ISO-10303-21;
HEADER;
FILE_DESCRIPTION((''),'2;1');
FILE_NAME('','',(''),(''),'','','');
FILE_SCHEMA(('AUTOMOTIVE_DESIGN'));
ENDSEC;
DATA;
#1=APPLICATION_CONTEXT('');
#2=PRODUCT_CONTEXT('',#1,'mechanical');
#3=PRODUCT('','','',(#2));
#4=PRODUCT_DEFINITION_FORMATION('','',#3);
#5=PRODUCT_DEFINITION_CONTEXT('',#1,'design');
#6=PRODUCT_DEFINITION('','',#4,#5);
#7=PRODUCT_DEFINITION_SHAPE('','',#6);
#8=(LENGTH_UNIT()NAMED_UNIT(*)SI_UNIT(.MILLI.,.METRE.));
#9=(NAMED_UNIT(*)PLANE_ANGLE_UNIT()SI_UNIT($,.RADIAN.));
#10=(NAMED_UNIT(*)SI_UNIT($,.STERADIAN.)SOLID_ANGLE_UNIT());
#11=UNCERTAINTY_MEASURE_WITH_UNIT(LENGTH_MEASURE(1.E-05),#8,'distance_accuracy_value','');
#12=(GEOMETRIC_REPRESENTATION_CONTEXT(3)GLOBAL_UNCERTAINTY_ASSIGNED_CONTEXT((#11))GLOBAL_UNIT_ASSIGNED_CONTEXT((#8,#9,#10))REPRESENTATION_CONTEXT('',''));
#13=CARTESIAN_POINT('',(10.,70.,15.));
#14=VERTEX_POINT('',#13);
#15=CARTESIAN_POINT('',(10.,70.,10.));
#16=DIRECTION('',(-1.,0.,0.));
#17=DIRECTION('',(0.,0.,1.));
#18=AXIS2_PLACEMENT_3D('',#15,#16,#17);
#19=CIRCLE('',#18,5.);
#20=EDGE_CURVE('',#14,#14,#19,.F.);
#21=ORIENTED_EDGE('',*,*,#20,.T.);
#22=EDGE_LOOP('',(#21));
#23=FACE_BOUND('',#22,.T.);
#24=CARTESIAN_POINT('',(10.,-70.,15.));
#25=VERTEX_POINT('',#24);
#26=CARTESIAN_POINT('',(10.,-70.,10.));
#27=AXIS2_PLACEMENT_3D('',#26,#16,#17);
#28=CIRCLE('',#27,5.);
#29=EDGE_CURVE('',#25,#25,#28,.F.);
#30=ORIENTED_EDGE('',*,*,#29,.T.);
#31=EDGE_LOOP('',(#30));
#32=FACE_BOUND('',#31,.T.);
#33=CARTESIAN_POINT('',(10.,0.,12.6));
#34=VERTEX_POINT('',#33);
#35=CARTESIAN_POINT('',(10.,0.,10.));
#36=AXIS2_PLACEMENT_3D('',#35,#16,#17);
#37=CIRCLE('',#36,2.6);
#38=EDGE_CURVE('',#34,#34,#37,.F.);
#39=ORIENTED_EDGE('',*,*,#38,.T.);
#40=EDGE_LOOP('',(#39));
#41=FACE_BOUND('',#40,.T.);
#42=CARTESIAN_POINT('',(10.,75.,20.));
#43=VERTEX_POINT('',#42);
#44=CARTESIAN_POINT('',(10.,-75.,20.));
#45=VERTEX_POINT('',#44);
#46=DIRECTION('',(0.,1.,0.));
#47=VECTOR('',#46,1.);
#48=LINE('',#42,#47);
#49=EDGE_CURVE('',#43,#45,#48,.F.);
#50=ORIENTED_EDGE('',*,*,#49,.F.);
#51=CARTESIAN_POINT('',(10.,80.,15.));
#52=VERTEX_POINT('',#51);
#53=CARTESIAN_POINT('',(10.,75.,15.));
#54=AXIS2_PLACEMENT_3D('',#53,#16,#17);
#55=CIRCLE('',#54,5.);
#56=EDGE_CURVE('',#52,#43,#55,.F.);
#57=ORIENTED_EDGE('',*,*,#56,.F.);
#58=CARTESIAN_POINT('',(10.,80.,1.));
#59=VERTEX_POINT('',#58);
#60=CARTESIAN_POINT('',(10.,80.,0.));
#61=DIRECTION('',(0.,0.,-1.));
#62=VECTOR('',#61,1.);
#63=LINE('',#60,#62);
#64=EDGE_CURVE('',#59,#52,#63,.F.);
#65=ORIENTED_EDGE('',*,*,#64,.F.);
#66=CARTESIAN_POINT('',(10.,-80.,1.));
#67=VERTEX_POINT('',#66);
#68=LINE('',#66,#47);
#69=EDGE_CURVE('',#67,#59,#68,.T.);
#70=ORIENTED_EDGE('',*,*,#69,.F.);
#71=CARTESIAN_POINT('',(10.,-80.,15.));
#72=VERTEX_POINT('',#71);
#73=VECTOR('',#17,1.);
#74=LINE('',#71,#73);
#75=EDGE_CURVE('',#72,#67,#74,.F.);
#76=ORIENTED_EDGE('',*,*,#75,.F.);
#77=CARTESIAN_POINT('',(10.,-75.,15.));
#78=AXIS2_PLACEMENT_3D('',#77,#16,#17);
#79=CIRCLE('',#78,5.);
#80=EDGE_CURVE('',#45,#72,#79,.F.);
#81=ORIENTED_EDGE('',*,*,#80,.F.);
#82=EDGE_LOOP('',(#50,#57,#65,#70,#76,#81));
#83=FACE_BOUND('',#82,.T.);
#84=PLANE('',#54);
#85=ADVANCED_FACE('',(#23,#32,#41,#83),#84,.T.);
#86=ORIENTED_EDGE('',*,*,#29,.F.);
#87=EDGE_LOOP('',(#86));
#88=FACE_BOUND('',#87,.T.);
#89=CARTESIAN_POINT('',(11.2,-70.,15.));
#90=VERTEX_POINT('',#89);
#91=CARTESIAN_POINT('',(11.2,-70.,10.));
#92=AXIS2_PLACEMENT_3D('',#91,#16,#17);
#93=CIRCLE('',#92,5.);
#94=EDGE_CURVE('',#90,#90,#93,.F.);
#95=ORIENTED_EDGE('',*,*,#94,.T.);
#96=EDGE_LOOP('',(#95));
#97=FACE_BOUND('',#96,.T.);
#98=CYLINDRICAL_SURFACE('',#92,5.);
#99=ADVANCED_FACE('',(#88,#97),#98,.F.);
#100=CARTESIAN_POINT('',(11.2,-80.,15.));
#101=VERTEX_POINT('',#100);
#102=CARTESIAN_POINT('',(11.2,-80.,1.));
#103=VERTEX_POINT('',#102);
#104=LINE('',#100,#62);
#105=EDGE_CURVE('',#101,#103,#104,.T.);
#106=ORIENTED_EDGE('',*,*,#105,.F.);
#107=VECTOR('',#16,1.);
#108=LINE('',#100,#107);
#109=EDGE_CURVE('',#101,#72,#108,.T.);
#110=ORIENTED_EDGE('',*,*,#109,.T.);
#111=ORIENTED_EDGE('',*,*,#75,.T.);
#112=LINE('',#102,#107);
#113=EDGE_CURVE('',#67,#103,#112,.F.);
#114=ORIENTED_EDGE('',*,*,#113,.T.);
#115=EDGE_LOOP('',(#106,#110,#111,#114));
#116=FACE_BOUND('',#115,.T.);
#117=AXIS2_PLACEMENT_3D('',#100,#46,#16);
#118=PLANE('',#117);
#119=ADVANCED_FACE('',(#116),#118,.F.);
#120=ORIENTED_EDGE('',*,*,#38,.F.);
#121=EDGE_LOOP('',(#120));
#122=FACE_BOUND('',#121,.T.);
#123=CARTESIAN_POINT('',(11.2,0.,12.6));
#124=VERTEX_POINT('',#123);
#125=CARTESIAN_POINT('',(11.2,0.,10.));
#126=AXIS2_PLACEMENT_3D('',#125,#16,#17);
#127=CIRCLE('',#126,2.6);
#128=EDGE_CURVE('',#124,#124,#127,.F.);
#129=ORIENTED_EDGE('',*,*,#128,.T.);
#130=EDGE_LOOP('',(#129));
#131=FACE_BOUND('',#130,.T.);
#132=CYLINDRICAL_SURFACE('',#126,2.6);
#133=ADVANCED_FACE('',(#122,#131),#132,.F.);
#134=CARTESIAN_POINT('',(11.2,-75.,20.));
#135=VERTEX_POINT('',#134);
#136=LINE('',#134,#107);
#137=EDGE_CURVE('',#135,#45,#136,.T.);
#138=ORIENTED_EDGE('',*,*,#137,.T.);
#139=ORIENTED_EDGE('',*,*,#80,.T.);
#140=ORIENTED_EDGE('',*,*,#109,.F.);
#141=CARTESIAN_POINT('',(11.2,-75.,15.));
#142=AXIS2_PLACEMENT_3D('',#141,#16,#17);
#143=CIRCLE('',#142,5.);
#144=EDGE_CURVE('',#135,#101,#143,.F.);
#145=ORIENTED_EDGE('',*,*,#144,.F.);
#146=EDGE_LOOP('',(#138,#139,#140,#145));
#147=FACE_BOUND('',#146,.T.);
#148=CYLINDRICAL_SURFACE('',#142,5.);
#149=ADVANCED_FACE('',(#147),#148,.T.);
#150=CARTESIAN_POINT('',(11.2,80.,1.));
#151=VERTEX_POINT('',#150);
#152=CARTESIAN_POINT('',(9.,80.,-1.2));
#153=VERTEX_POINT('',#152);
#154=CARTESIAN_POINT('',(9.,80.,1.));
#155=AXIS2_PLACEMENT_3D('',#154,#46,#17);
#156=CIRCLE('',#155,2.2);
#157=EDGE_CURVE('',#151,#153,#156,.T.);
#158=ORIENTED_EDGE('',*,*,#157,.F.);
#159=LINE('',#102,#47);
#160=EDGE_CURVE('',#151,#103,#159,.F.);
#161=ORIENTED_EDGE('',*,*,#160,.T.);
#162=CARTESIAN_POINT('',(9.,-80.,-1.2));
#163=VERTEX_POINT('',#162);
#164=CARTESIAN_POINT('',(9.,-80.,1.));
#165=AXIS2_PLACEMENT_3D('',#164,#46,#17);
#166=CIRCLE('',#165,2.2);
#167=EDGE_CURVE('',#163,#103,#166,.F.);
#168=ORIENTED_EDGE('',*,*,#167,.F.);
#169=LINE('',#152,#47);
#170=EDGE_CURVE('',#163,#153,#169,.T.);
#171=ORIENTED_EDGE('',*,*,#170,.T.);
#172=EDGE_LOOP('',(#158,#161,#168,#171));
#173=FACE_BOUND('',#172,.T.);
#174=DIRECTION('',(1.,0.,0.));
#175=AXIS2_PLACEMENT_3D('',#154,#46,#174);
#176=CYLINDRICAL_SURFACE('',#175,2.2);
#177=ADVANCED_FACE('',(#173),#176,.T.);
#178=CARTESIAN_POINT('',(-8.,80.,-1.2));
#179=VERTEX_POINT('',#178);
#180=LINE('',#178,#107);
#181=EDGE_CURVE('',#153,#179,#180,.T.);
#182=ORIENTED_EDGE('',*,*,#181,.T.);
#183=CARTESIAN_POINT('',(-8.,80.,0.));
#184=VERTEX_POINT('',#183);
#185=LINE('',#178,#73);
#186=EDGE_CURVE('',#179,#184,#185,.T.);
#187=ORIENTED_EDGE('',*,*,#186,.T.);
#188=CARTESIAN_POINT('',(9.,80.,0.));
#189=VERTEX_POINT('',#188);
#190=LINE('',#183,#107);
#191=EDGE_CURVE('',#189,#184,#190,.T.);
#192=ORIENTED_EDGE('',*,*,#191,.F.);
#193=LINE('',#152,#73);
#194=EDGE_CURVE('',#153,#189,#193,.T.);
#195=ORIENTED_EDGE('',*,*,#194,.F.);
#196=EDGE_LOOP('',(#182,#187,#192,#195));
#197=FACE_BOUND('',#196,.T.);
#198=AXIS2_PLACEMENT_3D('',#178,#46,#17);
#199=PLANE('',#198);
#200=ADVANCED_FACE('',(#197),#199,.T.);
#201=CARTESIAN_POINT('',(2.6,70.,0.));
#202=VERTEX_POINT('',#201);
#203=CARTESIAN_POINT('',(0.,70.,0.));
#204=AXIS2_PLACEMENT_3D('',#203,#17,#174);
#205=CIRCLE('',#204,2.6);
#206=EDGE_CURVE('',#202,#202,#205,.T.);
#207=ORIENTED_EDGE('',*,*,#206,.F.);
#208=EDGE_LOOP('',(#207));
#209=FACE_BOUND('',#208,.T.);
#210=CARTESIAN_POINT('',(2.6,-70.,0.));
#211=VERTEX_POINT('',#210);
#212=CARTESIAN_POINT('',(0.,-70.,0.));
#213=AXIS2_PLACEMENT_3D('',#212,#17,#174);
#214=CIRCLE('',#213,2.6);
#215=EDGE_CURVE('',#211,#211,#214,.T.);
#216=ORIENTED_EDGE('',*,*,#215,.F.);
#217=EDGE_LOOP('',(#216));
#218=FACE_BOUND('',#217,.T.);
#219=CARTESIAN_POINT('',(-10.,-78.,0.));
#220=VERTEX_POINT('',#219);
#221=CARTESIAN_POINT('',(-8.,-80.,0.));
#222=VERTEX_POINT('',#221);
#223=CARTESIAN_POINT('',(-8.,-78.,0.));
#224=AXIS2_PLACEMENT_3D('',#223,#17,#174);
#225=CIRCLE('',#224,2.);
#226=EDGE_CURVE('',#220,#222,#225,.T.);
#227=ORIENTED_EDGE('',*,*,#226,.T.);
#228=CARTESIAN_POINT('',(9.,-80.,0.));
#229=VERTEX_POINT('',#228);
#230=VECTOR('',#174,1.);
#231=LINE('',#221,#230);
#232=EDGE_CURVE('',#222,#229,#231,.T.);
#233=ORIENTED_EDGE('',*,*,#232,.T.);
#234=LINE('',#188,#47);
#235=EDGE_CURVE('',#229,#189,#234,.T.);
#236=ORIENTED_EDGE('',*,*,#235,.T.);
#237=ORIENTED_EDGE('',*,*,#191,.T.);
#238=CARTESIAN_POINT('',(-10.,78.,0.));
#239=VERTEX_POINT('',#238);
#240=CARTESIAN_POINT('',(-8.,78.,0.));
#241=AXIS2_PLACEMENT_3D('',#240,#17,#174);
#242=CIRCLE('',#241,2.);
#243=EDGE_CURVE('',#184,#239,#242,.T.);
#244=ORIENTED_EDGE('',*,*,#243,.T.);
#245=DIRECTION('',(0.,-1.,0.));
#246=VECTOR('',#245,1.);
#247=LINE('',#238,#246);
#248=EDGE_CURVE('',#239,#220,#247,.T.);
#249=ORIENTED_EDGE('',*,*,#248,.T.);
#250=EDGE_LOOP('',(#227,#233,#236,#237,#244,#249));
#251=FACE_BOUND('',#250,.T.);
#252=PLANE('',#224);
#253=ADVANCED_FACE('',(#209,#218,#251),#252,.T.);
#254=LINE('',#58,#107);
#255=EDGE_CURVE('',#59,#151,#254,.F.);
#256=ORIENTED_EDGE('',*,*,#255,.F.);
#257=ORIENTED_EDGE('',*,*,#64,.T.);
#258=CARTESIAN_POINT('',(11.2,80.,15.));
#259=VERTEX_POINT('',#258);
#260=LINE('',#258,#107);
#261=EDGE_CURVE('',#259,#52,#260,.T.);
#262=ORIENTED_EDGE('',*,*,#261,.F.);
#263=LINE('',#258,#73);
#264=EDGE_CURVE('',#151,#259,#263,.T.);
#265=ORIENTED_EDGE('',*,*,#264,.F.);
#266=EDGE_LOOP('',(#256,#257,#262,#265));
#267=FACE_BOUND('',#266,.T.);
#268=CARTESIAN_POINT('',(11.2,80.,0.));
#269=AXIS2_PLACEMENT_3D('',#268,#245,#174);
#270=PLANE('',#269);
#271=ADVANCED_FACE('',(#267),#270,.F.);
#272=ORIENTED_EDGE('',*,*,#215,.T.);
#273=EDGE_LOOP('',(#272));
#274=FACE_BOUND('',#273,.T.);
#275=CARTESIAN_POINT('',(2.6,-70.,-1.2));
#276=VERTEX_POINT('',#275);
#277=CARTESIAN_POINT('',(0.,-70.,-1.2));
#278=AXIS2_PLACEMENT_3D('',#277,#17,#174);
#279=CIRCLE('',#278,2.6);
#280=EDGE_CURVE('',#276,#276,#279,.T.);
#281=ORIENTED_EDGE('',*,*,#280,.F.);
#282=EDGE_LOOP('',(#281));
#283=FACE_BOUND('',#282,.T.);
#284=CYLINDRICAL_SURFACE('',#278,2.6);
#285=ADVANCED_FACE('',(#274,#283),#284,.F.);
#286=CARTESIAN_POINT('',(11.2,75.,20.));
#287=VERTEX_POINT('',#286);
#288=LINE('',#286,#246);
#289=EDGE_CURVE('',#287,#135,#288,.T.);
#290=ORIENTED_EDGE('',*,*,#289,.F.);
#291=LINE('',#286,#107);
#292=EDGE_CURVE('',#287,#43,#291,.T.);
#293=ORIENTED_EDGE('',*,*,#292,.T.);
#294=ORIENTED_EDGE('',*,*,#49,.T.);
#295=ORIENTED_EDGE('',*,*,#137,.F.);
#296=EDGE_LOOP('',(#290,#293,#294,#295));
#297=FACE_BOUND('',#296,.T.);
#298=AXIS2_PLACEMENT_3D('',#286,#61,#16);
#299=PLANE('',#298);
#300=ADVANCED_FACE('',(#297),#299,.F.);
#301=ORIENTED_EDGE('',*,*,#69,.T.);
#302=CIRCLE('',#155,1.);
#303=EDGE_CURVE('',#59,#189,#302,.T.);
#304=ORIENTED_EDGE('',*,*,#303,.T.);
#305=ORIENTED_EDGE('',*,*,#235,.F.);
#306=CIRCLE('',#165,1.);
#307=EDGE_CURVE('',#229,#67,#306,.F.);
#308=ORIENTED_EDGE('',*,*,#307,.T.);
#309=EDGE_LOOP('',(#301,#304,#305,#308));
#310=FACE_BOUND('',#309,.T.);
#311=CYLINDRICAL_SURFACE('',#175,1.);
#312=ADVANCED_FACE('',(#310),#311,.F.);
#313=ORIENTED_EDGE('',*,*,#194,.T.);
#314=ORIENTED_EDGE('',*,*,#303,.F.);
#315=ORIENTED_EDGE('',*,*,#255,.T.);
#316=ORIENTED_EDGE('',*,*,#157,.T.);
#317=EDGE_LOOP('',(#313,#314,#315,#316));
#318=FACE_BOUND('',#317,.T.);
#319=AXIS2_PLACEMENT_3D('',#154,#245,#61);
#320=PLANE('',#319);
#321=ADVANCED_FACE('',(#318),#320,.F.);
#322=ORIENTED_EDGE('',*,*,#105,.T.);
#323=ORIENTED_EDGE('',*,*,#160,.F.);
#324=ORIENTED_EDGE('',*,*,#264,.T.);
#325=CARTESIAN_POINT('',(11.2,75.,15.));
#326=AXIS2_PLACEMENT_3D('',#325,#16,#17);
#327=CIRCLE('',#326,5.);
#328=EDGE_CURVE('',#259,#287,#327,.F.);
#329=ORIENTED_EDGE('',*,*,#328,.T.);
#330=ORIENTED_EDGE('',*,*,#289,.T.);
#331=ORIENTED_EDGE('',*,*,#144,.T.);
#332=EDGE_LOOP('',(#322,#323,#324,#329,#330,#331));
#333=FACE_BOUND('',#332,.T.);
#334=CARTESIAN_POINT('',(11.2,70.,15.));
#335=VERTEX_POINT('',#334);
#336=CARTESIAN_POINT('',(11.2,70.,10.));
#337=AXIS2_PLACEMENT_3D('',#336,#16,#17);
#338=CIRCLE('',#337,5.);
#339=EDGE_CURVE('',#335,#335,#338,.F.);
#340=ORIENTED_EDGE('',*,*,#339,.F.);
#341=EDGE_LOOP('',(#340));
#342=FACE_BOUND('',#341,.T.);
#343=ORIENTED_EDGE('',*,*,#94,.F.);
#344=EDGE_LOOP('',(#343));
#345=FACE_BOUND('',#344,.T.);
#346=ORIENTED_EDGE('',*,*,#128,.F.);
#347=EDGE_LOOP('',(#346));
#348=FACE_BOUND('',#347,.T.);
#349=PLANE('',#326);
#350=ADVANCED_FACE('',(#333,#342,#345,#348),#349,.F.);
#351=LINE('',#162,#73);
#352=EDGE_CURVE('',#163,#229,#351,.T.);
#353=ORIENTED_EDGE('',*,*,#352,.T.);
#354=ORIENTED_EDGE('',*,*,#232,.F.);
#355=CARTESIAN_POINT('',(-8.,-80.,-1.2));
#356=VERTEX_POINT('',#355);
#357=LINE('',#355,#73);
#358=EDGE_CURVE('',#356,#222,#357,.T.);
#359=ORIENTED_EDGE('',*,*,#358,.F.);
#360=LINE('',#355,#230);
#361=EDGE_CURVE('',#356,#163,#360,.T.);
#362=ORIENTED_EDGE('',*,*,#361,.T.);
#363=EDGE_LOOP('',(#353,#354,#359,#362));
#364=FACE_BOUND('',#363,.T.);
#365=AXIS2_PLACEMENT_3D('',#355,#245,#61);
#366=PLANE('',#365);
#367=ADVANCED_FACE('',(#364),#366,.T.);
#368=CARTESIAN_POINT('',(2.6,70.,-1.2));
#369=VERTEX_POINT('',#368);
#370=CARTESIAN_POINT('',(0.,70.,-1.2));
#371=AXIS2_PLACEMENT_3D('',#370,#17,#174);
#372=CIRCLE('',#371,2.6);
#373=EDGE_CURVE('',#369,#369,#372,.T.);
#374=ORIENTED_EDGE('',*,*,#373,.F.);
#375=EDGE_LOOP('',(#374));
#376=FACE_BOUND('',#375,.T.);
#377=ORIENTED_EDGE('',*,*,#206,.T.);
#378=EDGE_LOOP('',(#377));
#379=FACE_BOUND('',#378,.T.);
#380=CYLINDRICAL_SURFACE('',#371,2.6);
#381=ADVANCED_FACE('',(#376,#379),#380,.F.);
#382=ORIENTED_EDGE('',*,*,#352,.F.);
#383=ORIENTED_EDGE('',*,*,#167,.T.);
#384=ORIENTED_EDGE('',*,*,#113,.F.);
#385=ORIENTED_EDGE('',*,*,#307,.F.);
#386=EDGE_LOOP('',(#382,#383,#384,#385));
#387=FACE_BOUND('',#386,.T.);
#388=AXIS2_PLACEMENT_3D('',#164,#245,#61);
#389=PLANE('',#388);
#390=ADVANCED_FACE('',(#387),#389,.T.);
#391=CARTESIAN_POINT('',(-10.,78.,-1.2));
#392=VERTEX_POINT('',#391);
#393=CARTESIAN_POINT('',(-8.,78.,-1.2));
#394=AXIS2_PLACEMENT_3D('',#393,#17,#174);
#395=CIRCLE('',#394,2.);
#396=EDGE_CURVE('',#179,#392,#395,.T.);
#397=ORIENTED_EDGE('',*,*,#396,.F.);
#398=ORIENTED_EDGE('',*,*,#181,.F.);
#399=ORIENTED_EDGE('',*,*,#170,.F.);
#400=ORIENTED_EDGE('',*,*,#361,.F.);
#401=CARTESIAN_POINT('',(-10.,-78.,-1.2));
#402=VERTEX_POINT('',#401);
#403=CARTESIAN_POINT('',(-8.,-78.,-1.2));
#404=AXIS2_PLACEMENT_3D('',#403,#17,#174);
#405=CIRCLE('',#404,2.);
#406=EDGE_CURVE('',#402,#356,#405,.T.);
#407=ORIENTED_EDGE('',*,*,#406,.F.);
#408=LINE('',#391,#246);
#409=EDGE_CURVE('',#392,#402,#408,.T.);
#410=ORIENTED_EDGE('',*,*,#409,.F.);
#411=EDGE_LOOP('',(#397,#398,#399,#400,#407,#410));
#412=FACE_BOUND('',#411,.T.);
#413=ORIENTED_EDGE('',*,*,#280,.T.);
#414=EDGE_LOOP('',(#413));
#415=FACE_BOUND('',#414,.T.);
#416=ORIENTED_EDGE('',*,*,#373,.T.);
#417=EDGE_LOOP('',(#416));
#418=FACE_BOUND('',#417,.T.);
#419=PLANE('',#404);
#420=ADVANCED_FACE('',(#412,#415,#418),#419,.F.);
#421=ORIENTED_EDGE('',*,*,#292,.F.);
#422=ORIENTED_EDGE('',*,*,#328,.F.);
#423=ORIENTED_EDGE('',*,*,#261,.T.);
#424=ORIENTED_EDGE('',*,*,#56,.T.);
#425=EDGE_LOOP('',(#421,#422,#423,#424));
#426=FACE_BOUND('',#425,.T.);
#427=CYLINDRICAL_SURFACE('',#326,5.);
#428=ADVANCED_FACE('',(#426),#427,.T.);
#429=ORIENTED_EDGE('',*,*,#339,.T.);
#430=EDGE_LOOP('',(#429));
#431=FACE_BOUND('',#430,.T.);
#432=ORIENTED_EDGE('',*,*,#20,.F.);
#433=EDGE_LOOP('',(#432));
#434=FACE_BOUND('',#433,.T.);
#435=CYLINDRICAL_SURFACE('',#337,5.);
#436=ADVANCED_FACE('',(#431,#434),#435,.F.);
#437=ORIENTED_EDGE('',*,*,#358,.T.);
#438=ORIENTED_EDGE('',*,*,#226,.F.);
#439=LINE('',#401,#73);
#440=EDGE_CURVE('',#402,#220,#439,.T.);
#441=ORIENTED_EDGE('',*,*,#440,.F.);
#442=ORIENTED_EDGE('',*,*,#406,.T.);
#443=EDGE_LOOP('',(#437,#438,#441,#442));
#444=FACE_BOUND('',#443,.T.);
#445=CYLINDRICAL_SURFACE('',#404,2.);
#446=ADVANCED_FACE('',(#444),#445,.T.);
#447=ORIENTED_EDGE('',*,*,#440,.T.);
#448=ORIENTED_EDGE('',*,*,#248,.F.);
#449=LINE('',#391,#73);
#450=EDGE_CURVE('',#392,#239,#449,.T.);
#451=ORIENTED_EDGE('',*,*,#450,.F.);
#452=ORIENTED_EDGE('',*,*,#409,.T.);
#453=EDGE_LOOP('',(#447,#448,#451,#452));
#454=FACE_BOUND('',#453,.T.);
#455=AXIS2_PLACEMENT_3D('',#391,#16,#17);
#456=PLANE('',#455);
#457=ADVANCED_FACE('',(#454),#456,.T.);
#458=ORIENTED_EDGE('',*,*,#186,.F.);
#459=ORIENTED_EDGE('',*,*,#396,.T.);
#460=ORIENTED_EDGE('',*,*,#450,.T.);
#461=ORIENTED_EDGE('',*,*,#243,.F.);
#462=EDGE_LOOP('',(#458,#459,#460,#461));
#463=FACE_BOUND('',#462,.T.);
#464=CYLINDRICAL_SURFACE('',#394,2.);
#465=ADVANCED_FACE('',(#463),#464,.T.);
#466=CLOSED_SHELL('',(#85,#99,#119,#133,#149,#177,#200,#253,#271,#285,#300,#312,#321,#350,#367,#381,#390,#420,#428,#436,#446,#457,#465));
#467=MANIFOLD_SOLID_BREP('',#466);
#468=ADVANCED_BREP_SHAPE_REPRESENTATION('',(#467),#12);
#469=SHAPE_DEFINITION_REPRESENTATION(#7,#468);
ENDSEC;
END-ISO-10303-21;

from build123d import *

# Parameters (mm, degrees)
SKETCH_1_R                   = 2.6
SM_BASE_FLANGE_1_DEPTH       = 1.2
SM_EDGE_FLANGE_2_DEPTH       = 160
SM_START                     = 1.2
SM_EDGE_FLANGE_2_PROFILE_R   = 5
SM_EDGE_FLANGE_2_PROFILE_R_2 = 2.6
SM_EDGE_FLANGE_2_FLAT_DEPTH  = 1.2


# Sheet-metal steps are written as plain solids
with BuildPart() as part:
    # Sketch 1 → 基体-法兰1 (new body)
    with BuildSketch(Plane.XY):
        with BuildLine():
            Line((-8, 80), (9, 80))
            Line((9, 80), (9, -80))
            Line((9, -80), (-8, -80))
            ThreePointArc((-8, -80), (-9.414213562, -79.414213562), (-10, -78))
            Line((-10, -78), (-10, 78))
            ThreePointArc((-10, 78), (-9.414213562, 79.414213562), (-8, 80))
        make_face()
        with Locations((0, 70)):
            Circle(SKETCH_1_R, mode=Mode.SUBTRACT)
        with Locations((0, -70)):
            Circle(SKETCH_1_R, mode=Mode.SUBTRACT)
    extrude(amount=-SM_BASE_FLANGE_1_DEPTH)

    # 边线-法兰2 bend section (across the edge) → 边线-法兰2 (add)
    with BuildSketch(Plane(origin=(10, -80, 0), x_dir=(-1, 0, 0), z_dir=(0, 1, 0))):
        with BuildLine():
            Line((-1.2, 1), (0, 1))
            ThreePointArc((0, 1), (0.292893219, 0.292893219), (1, 0))
            Line((1, 0), (1, -1.2))
            ThreePointArc((1, -1.2), (-0.555634919, -0.555634919), (-1.2, 1))
        make_face()
    extrude(amount=SM_EDGE_FLANGE_2_DEPTH)

    # 边线-法兰2 profile (on flange) → 边线-法兰2 flat (add)
    with BuildSketch(Plane.YZ.offset(10).offset(SM_START)):
        with BuildLine():
            Line((-80, 15), (-80, 1))
            Line((-80, 1), (80, 1))
            Line((80, 1), (80, 15))
            ThreePointArc((80, 15), (78.535533906, 18.535533906), (75, 20))
            Line((75, 20), (-75, 20))
            ThreePointArc((-75, 20), (-78.535533906, 18.535533906), (-80, 15))
        make_face()
        with Locations((-70, 10)):
            Circle(SM_EDGE_FLANGE_2_PROFILE_R, mode=Mode.SUBTRACT)
        with Locations((0, 10)):
            Circle(SM_EDGE_FLANGE_2_PROFILE_R_2, mode=Mode.SUBTRACT)
        with Locations((70, 10)):
            Circle(SM_EDGE_FLANGE_2_PROFILE_R, mode=Mode.SUBTRACT)
    extrude(amount=-SM_EDGE_FLANGE_2_FLAT_DEPTH)


solid = part.part
